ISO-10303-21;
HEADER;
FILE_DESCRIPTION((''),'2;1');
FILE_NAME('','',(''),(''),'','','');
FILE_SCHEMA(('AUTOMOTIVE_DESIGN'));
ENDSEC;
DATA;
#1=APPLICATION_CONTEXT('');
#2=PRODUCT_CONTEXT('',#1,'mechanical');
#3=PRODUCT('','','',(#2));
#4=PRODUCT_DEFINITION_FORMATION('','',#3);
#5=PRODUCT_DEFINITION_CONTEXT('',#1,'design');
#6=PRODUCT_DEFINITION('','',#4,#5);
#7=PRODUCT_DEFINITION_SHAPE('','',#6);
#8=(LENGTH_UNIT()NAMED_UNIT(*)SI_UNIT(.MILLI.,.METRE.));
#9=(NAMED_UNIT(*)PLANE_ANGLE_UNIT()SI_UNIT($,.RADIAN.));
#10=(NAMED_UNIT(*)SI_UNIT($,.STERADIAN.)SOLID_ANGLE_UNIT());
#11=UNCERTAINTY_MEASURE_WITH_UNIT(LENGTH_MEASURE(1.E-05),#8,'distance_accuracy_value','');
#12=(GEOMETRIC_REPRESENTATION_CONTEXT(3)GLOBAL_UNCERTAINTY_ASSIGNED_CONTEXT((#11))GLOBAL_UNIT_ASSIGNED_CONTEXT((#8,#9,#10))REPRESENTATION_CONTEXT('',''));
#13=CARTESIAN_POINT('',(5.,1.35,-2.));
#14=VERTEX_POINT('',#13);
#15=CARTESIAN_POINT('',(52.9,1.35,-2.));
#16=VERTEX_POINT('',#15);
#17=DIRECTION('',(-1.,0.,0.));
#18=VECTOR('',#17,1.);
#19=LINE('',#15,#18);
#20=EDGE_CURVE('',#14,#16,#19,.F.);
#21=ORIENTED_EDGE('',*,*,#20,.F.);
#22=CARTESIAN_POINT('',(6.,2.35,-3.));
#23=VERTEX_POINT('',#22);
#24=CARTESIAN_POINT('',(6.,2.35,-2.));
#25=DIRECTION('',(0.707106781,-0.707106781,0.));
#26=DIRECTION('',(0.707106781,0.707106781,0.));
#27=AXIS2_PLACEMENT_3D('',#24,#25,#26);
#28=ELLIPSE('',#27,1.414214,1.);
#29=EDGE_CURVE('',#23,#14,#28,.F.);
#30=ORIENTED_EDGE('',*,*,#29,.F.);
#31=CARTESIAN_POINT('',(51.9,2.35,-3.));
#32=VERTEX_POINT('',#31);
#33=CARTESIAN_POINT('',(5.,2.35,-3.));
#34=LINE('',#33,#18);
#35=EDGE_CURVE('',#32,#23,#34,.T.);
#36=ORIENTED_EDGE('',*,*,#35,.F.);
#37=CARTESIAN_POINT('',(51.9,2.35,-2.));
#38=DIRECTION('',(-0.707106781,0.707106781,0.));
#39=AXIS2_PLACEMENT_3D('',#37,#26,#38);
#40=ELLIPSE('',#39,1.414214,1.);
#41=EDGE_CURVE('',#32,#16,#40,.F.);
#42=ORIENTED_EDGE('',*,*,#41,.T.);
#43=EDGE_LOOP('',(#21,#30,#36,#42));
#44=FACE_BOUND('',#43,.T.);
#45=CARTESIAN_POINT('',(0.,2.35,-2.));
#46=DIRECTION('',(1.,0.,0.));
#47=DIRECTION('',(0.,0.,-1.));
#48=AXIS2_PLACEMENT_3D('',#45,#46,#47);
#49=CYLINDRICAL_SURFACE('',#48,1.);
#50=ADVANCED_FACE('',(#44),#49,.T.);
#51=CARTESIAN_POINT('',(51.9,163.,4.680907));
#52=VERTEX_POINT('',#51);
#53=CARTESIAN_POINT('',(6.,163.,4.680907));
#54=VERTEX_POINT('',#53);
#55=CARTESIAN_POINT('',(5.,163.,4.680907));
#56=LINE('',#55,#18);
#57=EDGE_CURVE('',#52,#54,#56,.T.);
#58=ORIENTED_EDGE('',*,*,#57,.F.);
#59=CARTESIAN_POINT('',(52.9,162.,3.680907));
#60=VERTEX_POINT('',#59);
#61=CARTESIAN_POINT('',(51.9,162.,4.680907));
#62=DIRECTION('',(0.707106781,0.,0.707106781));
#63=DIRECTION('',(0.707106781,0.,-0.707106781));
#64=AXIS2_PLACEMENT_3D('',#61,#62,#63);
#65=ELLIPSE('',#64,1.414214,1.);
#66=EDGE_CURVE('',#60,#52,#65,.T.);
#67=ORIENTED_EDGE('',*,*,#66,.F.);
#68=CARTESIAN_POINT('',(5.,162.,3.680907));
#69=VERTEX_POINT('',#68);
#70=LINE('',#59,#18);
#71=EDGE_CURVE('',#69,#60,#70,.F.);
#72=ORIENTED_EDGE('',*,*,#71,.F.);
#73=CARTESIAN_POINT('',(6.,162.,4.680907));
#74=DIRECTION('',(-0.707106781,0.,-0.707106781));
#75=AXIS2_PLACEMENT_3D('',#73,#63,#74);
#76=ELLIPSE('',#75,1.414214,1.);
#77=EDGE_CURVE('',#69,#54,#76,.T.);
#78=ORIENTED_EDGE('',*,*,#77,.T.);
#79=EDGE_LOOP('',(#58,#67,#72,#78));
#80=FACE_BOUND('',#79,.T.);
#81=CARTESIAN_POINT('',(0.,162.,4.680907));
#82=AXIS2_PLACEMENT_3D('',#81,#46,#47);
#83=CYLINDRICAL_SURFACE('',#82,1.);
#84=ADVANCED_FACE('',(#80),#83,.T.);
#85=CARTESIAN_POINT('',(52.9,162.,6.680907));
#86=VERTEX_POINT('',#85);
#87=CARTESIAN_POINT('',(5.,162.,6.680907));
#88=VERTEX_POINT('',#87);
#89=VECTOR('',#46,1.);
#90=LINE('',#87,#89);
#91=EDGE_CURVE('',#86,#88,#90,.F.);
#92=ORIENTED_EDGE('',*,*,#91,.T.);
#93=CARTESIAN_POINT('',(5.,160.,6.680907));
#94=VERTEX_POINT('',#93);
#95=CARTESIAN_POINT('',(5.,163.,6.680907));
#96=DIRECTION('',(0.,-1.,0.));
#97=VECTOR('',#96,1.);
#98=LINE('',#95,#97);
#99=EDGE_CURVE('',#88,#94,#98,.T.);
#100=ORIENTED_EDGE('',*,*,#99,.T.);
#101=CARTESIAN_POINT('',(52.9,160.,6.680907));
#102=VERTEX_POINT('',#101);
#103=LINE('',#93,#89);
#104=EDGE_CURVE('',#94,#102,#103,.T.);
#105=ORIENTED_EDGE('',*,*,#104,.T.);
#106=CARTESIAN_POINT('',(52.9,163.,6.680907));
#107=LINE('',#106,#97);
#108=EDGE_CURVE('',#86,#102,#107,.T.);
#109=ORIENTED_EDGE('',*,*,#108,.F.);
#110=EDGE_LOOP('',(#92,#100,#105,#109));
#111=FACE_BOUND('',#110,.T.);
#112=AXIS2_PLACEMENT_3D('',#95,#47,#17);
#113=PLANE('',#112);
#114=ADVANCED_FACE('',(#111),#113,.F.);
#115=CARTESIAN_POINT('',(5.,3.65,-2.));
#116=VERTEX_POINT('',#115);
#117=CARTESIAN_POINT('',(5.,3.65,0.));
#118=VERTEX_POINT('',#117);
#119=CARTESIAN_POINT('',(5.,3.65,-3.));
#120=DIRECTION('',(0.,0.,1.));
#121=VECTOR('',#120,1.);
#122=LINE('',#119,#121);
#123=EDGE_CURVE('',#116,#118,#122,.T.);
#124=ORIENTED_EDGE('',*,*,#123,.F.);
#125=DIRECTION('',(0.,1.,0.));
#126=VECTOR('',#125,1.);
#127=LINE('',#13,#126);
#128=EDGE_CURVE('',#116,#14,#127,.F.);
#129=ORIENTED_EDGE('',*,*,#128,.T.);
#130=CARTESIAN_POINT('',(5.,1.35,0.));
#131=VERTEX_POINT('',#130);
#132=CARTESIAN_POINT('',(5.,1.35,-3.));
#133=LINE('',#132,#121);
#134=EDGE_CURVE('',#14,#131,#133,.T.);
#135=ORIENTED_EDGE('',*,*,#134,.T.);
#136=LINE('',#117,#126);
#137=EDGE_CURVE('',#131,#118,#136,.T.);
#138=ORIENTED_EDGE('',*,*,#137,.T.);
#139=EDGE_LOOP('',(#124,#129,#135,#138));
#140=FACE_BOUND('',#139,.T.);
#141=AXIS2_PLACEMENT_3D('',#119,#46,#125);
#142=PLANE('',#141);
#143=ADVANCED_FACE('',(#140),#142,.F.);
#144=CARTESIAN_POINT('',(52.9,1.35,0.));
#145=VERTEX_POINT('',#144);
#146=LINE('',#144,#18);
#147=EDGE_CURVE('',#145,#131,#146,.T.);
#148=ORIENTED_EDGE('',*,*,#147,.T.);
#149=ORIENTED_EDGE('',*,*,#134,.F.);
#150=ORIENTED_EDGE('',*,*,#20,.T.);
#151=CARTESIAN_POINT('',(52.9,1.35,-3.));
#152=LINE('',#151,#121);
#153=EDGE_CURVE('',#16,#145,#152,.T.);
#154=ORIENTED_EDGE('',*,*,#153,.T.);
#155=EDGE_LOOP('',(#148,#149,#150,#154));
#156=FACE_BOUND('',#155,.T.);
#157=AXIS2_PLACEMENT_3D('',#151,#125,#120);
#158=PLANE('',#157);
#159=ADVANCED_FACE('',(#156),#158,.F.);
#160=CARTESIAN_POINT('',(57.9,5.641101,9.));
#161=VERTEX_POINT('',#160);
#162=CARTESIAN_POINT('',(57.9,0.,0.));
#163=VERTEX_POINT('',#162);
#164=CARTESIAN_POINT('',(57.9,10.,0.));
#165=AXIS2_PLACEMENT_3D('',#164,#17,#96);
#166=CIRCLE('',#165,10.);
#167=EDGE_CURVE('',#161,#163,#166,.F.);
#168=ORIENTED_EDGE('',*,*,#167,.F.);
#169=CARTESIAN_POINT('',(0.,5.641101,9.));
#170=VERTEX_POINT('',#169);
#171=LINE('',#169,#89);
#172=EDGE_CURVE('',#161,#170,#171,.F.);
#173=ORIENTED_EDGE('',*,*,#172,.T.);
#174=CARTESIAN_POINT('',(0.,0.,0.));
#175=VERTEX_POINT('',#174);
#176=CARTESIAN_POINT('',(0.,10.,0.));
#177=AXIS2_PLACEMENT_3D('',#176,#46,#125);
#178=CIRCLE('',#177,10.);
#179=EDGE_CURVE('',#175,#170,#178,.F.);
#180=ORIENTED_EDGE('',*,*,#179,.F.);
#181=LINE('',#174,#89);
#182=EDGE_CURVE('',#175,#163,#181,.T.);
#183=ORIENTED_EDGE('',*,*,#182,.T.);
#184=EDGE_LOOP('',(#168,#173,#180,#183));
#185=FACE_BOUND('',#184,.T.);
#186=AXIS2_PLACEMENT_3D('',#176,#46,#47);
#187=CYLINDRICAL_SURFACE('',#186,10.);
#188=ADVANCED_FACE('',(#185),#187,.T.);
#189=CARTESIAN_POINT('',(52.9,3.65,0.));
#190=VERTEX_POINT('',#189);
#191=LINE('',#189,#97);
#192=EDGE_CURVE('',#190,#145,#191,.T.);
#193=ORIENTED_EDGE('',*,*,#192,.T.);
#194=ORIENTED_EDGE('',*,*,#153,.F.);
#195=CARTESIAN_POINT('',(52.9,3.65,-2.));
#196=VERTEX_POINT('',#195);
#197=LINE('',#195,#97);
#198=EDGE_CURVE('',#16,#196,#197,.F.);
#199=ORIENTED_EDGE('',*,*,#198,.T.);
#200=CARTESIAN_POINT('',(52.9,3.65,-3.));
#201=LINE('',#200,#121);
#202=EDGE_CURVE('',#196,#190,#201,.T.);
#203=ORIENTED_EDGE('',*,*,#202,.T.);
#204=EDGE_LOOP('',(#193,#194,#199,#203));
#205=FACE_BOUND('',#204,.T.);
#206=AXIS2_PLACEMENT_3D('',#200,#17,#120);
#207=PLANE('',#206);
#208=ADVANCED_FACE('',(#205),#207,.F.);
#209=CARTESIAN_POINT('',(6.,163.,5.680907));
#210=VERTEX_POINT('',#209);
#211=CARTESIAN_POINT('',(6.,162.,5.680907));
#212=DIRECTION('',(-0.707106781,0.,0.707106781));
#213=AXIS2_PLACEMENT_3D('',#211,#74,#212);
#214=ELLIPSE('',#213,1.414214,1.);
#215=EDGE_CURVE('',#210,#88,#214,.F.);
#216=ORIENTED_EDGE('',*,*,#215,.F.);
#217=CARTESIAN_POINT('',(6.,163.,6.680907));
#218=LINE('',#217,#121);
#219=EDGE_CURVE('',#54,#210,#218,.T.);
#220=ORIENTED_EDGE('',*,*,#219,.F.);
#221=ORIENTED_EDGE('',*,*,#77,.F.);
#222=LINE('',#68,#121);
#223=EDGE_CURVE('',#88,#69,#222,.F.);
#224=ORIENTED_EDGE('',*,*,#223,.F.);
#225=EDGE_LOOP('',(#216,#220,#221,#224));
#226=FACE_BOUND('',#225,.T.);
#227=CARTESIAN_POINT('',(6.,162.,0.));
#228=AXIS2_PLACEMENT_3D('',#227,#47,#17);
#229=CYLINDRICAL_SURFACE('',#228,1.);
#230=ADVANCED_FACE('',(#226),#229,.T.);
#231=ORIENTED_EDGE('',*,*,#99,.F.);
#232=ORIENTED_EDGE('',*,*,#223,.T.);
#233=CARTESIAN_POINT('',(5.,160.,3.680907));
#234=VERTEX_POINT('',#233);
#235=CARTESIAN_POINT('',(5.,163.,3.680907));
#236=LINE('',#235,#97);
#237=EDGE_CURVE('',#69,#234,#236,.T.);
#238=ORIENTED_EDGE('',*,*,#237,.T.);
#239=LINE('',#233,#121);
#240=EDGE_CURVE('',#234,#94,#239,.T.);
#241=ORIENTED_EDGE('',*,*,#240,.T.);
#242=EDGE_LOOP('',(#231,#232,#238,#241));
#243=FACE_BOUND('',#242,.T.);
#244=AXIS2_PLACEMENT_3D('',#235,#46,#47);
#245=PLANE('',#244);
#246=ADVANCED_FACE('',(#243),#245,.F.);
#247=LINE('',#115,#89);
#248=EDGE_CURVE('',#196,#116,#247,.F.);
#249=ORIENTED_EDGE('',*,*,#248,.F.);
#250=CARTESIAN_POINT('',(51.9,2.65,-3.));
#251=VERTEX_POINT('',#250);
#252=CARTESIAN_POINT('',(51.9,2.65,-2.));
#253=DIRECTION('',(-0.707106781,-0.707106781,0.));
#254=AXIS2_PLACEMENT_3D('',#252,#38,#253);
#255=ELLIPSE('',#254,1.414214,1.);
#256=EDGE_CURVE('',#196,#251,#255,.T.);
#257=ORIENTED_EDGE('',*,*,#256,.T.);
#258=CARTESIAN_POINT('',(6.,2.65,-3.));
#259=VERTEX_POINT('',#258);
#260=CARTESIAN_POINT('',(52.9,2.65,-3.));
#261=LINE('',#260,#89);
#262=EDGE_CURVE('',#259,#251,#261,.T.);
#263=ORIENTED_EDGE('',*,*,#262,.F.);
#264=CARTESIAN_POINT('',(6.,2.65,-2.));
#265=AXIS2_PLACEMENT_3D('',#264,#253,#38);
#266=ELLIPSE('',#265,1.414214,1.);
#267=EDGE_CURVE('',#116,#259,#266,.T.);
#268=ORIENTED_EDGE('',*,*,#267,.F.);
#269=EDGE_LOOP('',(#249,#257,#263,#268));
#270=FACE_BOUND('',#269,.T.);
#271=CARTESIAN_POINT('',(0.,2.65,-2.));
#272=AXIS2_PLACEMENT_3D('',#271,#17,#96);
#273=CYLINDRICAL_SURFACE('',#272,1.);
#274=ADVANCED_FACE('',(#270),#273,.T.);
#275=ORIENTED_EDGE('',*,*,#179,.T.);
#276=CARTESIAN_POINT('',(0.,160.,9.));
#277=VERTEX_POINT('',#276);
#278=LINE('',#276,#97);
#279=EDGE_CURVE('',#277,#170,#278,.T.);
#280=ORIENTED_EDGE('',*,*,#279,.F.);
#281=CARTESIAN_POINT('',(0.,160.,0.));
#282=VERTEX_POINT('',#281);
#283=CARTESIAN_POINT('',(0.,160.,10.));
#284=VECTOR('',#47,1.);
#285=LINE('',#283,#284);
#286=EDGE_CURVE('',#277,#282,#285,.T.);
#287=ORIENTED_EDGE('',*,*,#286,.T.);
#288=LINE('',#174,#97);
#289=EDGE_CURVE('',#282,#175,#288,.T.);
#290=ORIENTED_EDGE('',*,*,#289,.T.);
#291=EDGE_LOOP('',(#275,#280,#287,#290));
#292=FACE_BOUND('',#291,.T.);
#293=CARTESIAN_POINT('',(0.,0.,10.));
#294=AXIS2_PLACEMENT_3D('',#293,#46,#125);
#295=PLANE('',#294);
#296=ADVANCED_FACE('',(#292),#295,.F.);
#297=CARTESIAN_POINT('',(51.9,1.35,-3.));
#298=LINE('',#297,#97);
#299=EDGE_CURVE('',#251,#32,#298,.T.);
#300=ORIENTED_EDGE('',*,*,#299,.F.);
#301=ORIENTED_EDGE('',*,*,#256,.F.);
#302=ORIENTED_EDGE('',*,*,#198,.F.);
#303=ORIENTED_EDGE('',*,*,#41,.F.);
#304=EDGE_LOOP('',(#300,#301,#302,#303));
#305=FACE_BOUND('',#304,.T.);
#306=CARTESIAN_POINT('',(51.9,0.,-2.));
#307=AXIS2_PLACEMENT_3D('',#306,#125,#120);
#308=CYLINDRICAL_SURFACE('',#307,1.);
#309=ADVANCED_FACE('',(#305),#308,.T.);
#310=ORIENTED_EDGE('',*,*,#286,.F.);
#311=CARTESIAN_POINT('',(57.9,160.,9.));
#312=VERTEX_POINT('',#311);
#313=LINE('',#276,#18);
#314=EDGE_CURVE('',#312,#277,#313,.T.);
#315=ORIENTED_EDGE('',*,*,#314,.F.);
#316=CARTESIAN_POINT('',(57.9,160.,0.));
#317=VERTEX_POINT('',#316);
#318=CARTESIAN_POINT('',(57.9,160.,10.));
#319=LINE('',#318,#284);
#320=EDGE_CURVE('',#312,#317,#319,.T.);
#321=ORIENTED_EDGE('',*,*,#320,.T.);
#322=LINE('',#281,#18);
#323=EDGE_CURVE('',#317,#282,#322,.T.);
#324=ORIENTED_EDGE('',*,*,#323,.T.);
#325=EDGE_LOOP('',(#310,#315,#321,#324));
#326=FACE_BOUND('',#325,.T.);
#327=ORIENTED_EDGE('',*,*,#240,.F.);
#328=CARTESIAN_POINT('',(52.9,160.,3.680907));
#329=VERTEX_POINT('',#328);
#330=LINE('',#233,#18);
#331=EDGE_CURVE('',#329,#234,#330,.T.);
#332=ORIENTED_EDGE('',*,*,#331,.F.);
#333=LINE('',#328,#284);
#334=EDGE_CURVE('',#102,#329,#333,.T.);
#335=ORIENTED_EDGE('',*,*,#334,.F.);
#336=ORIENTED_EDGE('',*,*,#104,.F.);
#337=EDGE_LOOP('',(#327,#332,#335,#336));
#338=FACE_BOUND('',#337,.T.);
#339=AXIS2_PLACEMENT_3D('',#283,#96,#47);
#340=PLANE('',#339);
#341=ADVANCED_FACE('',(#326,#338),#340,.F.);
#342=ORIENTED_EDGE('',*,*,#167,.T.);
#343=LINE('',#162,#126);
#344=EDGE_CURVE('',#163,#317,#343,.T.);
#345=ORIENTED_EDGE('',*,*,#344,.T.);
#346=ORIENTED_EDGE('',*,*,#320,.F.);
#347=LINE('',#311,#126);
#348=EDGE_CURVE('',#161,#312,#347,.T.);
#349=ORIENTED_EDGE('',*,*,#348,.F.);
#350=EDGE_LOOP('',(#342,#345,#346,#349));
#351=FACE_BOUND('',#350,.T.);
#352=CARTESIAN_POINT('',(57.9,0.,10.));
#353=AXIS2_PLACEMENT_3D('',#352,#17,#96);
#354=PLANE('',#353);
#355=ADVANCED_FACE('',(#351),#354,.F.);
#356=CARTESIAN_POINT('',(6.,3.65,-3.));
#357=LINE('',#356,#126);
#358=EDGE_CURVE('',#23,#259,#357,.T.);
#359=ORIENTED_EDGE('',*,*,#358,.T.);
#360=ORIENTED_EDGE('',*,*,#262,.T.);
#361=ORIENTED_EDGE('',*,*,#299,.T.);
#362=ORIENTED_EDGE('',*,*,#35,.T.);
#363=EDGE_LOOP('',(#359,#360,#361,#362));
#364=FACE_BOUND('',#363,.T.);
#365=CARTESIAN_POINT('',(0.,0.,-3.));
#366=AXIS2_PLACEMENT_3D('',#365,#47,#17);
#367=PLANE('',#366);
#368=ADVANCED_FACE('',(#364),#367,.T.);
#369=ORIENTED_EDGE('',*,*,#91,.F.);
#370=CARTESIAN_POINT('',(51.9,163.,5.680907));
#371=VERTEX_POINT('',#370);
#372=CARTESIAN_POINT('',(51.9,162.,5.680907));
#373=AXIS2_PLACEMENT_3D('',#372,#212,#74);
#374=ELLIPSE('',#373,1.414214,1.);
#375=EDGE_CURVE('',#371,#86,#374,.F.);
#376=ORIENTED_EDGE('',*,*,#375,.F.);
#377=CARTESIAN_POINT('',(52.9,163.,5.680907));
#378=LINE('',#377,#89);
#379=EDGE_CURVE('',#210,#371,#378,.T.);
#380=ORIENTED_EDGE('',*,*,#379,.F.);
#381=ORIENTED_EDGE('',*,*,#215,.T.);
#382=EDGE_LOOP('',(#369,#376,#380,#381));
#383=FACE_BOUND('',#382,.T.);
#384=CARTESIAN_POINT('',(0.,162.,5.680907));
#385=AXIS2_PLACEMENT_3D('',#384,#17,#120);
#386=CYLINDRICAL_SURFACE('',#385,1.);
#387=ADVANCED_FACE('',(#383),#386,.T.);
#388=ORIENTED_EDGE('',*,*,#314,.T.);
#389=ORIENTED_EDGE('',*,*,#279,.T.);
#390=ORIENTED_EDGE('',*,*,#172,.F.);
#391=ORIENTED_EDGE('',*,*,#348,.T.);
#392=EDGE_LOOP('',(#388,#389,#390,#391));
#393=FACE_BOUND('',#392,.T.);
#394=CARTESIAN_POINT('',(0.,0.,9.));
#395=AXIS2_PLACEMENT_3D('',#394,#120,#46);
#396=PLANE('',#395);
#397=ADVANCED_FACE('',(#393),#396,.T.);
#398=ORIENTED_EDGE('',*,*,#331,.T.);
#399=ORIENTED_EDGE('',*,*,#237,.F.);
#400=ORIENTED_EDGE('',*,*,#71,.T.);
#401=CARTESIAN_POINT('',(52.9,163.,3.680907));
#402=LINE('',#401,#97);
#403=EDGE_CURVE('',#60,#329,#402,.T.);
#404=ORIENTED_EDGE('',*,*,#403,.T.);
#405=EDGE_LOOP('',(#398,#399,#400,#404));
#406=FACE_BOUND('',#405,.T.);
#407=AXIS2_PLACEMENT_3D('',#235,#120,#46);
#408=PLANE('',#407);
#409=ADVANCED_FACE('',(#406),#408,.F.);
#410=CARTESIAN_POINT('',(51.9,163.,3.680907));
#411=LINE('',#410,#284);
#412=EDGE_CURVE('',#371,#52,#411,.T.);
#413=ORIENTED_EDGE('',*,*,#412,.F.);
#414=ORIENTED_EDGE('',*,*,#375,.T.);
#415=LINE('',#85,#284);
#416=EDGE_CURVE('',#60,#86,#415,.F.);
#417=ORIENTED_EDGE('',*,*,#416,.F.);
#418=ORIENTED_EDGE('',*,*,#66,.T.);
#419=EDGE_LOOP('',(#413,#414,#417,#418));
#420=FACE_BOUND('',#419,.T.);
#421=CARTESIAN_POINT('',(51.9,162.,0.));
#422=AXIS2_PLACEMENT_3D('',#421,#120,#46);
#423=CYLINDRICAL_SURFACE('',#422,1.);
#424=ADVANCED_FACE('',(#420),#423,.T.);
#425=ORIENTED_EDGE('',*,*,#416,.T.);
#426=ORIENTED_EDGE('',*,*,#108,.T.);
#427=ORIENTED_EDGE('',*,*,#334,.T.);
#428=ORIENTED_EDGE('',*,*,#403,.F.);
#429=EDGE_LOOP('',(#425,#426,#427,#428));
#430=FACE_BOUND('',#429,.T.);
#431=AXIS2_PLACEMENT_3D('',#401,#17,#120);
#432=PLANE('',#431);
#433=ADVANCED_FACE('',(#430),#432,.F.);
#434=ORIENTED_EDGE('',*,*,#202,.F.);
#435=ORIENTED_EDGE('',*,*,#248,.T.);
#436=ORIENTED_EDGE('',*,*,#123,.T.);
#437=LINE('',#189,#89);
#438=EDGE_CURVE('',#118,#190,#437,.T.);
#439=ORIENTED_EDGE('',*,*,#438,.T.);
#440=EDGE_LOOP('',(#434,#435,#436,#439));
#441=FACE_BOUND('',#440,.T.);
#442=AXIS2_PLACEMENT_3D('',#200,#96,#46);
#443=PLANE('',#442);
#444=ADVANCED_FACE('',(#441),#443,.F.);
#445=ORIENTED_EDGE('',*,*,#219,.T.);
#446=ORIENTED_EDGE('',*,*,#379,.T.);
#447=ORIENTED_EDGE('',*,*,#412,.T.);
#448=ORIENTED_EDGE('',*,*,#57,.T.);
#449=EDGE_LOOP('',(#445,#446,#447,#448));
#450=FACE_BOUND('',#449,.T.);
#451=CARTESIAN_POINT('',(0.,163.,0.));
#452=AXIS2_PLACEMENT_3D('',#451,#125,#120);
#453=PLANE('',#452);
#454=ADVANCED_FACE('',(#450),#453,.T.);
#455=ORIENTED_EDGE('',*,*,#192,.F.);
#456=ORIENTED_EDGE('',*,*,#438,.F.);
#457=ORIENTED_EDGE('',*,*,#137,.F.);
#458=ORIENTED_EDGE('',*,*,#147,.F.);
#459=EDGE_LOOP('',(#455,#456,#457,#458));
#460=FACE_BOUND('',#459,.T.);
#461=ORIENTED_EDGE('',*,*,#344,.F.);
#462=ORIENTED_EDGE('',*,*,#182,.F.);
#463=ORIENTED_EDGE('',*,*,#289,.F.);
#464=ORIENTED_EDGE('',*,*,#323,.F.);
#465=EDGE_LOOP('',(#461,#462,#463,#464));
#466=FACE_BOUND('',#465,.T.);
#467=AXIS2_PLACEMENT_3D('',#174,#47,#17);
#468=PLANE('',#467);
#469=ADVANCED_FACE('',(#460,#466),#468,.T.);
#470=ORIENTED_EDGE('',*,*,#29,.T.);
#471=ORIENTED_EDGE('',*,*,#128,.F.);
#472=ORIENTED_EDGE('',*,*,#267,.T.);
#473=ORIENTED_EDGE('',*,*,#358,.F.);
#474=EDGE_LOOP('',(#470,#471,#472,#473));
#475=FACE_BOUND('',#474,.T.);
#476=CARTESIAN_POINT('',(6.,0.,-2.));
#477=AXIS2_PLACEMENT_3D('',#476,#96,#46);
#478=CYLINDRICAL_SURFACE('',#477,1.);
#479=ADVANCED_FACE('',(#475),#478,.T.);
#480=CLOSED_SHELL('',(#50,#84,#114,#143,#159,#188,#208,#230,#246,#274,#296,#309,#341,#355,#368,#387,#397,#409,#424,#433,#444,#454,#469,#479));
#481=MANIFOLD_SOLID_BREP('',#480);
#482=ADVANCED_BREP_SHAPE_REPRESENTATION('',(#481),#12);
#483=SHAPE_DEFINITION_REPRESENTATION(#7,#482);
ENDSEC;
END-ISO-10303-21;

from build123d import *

# Parameters (mm, degrees)
SKETCH1_W           = 57.9
SKETCH1_H           = 160
BOSS_EXTRUDE2_DEPTH = 10
FILLET2_R           = 10
SKETCH2_W           = 47.9
SKETCH2_H           = 2.3
BOSS_EXTRUDE3_DEPTH = 3
FILLET3_R           = 1
SKETCH4_W           = 47.9
SKETCH4_H           = 3
BOSS_EXTRUDE4_DEPTH = 3
FILLET4_R           = 1
SKETCH5_W           = 57.9
SKETCH5_H           = 160
CUT_EXTRUDE1_DEPTH  = 1


with BuildPart() as part:
    # Sketch1 → Boss-Extrude2 (new body)
    with BuildSketch(Plane.XY):
        with Locations((28.95, 80)):
            Rectangle(SKETCH1_W, SKETCH1_H)
    extrude(amount=BOSS_EXTRUDE2_DEPTH)

    # Fillet2
    fillet2_edges = [part.edges().sort_by_distance(p)[0] for p in [
        (28.95, 0, 10),
    ]]
    fillet(fillet2_edges, radius=FILLET2_R - 0.0001)  # a hair under: the kernel refuses the full size

    # Sketch2 → Boss-Extrude3 (add)
    with BuildSketch(Plane(origin=(0, 0, 0), x_dir=(-1, 0, 0), z_dir=(0, 0, -1))):
        with Locations((-28.95, 2.5)):
            Rectangle(SKETCH2_W, SKETCH2_H)
    extrude(amount=BOSS_EXTRUDE3_DEPTH)

    # Fillet3
    fillet3_edges = [part.edges().sort_by_distance(p)[0] for p in [
        (52.9, 2.5, -3),
        (28.95, 1.35, -3),
        (5, 2.5, -3),
        (28.95, 3.65, -3),
    ]]
    fillet(fillet3_edges, radius=FILLET3_R)

    # Sketch4 → Boss-Extrude4 (add)
    with BuildSketch(Plane(origin=(0, 160, 0), x_dir=(1, 0, 0), z_dir=(0, 1, 0))):
        with Locations((28.95, -5.180907412)):
            Rectangle(SKETCH4_W, SKETCH4_H)
    extrude(amount=BOSS_EXTRUDE4_DEPTH)

    # Fillet4
    fillet4_edges = [part.edges().sort_by_distance(p)[0] for p in [
        (5, 163, 5.180907412),
        (28.95, 163, 6.680907412),
        (52.9, 163, 5.180907412),
        (28.95, 163, 3.680907412),
    ]]
    fillet(fillet4_edges, radius=FILLET4_R)

    # Sketch5 → Cut-Extrude1 (cut)
    with BuildSketch(Plane.XY.offset(10)):
        with Locations((28.95, 80)):
            Rectangle(SKETCH5_W, SKETCH5_H)
    extrude(amount=-CUT_EXTRUDE1_DEPTH, mode=Mode.SUBTRACT)


solid = part.part
